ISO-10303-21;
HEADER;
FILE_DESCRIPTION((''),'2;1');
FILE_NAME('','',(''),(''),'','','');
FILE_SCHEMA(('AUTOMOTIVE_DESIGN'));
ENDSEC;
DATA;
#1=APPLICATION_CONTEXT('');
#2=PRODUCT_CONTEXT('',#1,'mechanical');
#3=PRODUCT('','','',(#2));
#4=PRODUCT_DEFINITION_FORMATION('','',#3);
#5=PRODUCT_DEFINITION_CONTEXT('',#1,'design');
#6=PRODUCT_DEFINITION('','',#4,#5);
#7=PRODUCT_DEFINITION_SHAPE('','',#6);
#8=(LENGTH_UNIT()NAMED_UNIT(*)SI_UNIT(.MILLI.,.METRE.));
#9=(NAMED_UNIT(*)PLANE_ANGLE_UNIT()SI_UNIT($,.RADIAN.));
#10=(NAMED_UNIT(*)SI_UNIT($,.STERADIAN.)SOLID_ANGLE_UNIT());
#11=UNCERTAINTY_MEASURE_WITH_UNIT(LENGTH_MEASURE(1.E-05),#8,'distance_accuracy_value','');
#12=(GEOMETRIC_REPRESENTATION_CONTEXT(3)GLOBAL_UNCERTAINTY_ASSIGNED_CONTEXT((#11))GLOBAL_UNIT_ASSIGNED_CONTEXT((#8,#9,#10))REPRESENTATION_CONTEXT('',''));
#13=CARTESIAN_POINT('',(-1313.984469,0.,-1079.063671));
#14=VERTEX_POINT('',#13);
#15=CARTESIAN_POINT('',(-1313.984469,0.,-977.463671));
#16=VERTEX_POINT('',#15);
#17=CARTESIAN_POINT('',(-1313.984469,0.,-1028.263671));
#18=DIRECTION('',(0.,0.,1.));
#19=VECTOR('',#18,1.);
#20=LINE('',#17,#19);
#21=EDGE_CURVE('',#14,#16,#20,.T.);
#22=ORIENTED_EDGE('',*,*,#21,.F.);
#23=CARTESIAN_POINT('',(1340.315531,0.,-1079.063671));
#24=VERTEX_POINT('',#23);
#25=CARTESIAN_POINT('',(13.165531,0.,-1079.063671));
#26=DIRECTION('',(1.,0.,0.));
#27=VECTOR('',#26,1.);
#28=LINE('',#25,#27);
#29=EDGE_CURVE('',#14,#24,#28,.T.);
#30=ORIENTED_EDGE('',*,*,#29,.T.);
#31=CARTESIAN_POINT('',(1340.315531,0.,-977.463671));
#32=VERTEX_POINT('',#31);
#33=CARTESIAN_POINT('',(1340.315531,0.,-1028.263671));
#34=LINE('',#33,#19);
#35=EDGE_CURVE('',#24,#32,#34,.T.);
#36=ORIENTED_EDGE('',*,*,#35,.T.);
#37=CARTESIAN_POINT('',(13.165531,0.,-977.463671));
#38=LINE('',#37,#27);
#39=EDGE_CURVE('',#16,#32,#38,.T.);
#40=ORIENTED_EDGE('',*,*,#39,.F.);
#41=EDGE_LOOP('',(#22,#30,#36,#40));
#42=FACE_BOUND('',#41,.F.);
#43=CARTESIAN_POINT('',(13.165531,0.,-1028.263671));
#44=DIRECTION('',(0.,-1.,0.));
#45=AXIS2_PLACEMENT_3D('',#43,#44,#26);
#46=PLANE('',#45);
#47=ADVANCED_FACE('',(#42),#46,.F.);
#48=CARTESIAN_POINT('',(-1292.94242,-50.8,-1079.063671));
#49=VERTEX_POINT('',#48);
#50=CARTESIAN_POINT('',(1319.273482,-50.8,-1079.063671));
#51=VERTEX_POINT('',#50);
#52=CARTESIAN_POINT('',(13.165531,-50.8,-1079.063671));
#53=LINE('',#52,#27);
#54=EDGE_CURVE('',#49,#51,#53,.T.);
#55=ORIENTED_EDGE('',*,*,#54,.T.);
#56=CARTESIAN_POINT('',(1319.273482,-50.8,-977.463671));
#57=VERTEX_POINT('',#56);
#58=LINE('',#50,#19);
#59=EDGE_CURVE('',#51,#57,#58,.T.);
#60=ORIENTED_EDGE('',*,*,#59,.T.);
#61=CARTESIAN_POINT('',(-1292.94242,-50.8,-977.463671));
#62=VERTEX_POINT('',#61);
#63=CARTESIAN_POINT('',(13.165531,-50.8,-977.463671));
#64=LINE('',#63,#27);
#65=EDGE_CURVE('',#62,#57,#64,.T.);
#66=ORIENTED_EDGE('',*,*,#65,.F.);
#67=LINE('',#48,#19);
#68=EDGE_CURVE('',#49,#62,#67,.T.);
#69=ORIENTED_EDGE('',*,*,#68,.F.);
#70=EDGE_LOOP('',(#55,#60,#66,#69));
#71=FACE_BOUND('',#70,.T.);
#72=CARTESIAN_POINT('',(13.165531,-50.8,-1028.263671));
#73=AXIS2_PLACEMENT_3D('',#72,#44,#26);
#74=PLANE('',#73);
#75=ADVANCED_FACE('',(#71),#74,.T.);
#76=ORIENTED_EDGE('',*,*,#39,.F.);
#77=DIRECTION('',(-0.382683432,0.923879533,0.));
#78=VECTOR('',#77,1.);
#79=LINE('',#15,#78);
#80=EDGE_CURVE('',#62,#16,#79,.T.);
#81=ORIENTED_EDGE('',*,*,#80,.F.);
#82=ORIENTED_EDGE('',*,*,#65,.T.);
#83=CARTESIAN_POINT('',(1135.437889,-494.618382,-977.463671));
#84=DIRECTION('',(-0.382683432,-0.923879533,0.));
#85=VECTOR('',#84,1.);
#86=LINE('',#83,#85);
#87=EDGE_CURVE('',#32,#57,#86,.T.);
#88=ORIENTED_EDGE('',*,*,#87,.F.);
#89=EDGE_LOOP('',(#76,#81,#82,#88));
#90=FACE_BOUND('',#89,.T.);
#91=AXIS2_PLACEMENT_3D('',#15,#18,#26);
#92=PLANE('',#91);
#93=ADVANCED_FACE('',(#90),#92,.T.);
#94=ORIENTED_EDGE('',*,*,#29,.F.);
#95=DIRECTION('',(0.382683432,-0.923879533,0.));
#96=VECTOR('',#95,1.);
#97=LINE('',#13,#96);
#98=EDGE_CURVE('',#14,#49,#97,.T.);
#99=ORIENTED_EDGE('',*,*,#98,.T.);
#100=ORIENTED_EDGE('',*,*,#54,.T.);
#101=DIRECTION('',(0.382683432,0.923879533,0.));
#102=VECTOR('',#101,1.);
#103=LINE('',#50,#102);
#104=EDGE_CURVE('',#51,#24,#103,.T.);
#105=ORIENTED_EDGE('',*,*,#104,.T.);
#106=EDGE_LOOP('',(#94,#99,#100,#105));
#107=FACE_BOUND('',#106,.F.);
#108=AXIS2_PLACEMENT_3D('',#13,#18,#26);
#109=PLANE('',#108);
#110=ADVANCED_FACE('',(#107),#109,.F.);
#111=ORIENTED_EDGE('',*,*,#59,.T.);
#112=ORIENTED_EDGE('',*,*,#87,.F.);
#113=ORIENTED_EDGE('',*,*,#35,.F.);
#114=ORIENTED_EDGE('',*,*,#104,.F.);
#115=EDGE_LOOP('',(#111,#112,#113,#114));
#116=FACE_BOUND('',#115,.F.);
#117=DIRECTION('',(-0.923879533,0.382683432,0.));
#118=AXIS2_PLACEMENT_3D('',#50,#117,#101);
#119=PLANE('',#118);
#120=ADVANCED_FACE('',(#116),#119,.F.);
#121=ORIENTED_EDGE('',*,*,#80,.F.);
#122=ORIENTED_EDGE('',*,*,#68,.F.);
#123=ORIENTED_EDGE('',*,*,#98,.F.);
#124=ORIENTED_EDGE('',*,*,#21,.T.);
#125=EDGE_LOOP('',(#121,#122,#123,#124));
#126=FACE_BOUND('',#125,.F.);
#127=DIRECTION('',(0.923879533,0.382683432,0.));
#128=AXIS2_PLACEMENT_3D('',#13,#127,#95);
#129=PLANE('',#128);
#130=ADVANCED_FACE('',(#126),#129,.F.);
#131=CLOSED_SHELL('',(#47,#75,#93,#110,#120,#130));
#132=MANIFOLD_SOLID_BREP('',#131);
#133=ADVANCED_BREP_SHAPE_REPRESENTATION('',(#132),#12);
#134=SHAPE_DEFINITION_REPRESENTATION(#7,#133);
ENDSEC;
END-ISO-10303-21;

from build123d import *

# Parameters (mm, degrees)
F0_W     = 2654.3
F0_H     = 101.6
F1_DEPTH = 50.8
F3_DEPTH = 163.068


# Not quite as in the source:
# - a feature names something its author has since deleted; it is built from what else it names


with BuildPart() as f1:
    # F0 (on Front) → F1 (new body)
    with BuildSketch(Plane.XZ):
        with Locations((13.1655312276, -1028.2636712667)):
            Rectangle(F0_W, F0_H)
    extrude(amount=F1_DEPTH)

    # F2 (on face) → F3 (cut)
    with BuildSketch(Plane(origin=(0, 0, -1079.0636712667), x_dir=(1, 0, 0), z_dir=(0, 0, -1))):
        Polygon((-1292.9424198039, 50.8), (-1313.9844687724, 50.8), (-1313.9844687724, 0), align=None)
        Polygon((1340.3155312276, 0), (1340.3155312276, 50.8), (1319.273482259, 50.8), align=None)
    extrude(amount=-F3_DEPTH, mode=Mode.SUBTRACT)


solid = f1.part
